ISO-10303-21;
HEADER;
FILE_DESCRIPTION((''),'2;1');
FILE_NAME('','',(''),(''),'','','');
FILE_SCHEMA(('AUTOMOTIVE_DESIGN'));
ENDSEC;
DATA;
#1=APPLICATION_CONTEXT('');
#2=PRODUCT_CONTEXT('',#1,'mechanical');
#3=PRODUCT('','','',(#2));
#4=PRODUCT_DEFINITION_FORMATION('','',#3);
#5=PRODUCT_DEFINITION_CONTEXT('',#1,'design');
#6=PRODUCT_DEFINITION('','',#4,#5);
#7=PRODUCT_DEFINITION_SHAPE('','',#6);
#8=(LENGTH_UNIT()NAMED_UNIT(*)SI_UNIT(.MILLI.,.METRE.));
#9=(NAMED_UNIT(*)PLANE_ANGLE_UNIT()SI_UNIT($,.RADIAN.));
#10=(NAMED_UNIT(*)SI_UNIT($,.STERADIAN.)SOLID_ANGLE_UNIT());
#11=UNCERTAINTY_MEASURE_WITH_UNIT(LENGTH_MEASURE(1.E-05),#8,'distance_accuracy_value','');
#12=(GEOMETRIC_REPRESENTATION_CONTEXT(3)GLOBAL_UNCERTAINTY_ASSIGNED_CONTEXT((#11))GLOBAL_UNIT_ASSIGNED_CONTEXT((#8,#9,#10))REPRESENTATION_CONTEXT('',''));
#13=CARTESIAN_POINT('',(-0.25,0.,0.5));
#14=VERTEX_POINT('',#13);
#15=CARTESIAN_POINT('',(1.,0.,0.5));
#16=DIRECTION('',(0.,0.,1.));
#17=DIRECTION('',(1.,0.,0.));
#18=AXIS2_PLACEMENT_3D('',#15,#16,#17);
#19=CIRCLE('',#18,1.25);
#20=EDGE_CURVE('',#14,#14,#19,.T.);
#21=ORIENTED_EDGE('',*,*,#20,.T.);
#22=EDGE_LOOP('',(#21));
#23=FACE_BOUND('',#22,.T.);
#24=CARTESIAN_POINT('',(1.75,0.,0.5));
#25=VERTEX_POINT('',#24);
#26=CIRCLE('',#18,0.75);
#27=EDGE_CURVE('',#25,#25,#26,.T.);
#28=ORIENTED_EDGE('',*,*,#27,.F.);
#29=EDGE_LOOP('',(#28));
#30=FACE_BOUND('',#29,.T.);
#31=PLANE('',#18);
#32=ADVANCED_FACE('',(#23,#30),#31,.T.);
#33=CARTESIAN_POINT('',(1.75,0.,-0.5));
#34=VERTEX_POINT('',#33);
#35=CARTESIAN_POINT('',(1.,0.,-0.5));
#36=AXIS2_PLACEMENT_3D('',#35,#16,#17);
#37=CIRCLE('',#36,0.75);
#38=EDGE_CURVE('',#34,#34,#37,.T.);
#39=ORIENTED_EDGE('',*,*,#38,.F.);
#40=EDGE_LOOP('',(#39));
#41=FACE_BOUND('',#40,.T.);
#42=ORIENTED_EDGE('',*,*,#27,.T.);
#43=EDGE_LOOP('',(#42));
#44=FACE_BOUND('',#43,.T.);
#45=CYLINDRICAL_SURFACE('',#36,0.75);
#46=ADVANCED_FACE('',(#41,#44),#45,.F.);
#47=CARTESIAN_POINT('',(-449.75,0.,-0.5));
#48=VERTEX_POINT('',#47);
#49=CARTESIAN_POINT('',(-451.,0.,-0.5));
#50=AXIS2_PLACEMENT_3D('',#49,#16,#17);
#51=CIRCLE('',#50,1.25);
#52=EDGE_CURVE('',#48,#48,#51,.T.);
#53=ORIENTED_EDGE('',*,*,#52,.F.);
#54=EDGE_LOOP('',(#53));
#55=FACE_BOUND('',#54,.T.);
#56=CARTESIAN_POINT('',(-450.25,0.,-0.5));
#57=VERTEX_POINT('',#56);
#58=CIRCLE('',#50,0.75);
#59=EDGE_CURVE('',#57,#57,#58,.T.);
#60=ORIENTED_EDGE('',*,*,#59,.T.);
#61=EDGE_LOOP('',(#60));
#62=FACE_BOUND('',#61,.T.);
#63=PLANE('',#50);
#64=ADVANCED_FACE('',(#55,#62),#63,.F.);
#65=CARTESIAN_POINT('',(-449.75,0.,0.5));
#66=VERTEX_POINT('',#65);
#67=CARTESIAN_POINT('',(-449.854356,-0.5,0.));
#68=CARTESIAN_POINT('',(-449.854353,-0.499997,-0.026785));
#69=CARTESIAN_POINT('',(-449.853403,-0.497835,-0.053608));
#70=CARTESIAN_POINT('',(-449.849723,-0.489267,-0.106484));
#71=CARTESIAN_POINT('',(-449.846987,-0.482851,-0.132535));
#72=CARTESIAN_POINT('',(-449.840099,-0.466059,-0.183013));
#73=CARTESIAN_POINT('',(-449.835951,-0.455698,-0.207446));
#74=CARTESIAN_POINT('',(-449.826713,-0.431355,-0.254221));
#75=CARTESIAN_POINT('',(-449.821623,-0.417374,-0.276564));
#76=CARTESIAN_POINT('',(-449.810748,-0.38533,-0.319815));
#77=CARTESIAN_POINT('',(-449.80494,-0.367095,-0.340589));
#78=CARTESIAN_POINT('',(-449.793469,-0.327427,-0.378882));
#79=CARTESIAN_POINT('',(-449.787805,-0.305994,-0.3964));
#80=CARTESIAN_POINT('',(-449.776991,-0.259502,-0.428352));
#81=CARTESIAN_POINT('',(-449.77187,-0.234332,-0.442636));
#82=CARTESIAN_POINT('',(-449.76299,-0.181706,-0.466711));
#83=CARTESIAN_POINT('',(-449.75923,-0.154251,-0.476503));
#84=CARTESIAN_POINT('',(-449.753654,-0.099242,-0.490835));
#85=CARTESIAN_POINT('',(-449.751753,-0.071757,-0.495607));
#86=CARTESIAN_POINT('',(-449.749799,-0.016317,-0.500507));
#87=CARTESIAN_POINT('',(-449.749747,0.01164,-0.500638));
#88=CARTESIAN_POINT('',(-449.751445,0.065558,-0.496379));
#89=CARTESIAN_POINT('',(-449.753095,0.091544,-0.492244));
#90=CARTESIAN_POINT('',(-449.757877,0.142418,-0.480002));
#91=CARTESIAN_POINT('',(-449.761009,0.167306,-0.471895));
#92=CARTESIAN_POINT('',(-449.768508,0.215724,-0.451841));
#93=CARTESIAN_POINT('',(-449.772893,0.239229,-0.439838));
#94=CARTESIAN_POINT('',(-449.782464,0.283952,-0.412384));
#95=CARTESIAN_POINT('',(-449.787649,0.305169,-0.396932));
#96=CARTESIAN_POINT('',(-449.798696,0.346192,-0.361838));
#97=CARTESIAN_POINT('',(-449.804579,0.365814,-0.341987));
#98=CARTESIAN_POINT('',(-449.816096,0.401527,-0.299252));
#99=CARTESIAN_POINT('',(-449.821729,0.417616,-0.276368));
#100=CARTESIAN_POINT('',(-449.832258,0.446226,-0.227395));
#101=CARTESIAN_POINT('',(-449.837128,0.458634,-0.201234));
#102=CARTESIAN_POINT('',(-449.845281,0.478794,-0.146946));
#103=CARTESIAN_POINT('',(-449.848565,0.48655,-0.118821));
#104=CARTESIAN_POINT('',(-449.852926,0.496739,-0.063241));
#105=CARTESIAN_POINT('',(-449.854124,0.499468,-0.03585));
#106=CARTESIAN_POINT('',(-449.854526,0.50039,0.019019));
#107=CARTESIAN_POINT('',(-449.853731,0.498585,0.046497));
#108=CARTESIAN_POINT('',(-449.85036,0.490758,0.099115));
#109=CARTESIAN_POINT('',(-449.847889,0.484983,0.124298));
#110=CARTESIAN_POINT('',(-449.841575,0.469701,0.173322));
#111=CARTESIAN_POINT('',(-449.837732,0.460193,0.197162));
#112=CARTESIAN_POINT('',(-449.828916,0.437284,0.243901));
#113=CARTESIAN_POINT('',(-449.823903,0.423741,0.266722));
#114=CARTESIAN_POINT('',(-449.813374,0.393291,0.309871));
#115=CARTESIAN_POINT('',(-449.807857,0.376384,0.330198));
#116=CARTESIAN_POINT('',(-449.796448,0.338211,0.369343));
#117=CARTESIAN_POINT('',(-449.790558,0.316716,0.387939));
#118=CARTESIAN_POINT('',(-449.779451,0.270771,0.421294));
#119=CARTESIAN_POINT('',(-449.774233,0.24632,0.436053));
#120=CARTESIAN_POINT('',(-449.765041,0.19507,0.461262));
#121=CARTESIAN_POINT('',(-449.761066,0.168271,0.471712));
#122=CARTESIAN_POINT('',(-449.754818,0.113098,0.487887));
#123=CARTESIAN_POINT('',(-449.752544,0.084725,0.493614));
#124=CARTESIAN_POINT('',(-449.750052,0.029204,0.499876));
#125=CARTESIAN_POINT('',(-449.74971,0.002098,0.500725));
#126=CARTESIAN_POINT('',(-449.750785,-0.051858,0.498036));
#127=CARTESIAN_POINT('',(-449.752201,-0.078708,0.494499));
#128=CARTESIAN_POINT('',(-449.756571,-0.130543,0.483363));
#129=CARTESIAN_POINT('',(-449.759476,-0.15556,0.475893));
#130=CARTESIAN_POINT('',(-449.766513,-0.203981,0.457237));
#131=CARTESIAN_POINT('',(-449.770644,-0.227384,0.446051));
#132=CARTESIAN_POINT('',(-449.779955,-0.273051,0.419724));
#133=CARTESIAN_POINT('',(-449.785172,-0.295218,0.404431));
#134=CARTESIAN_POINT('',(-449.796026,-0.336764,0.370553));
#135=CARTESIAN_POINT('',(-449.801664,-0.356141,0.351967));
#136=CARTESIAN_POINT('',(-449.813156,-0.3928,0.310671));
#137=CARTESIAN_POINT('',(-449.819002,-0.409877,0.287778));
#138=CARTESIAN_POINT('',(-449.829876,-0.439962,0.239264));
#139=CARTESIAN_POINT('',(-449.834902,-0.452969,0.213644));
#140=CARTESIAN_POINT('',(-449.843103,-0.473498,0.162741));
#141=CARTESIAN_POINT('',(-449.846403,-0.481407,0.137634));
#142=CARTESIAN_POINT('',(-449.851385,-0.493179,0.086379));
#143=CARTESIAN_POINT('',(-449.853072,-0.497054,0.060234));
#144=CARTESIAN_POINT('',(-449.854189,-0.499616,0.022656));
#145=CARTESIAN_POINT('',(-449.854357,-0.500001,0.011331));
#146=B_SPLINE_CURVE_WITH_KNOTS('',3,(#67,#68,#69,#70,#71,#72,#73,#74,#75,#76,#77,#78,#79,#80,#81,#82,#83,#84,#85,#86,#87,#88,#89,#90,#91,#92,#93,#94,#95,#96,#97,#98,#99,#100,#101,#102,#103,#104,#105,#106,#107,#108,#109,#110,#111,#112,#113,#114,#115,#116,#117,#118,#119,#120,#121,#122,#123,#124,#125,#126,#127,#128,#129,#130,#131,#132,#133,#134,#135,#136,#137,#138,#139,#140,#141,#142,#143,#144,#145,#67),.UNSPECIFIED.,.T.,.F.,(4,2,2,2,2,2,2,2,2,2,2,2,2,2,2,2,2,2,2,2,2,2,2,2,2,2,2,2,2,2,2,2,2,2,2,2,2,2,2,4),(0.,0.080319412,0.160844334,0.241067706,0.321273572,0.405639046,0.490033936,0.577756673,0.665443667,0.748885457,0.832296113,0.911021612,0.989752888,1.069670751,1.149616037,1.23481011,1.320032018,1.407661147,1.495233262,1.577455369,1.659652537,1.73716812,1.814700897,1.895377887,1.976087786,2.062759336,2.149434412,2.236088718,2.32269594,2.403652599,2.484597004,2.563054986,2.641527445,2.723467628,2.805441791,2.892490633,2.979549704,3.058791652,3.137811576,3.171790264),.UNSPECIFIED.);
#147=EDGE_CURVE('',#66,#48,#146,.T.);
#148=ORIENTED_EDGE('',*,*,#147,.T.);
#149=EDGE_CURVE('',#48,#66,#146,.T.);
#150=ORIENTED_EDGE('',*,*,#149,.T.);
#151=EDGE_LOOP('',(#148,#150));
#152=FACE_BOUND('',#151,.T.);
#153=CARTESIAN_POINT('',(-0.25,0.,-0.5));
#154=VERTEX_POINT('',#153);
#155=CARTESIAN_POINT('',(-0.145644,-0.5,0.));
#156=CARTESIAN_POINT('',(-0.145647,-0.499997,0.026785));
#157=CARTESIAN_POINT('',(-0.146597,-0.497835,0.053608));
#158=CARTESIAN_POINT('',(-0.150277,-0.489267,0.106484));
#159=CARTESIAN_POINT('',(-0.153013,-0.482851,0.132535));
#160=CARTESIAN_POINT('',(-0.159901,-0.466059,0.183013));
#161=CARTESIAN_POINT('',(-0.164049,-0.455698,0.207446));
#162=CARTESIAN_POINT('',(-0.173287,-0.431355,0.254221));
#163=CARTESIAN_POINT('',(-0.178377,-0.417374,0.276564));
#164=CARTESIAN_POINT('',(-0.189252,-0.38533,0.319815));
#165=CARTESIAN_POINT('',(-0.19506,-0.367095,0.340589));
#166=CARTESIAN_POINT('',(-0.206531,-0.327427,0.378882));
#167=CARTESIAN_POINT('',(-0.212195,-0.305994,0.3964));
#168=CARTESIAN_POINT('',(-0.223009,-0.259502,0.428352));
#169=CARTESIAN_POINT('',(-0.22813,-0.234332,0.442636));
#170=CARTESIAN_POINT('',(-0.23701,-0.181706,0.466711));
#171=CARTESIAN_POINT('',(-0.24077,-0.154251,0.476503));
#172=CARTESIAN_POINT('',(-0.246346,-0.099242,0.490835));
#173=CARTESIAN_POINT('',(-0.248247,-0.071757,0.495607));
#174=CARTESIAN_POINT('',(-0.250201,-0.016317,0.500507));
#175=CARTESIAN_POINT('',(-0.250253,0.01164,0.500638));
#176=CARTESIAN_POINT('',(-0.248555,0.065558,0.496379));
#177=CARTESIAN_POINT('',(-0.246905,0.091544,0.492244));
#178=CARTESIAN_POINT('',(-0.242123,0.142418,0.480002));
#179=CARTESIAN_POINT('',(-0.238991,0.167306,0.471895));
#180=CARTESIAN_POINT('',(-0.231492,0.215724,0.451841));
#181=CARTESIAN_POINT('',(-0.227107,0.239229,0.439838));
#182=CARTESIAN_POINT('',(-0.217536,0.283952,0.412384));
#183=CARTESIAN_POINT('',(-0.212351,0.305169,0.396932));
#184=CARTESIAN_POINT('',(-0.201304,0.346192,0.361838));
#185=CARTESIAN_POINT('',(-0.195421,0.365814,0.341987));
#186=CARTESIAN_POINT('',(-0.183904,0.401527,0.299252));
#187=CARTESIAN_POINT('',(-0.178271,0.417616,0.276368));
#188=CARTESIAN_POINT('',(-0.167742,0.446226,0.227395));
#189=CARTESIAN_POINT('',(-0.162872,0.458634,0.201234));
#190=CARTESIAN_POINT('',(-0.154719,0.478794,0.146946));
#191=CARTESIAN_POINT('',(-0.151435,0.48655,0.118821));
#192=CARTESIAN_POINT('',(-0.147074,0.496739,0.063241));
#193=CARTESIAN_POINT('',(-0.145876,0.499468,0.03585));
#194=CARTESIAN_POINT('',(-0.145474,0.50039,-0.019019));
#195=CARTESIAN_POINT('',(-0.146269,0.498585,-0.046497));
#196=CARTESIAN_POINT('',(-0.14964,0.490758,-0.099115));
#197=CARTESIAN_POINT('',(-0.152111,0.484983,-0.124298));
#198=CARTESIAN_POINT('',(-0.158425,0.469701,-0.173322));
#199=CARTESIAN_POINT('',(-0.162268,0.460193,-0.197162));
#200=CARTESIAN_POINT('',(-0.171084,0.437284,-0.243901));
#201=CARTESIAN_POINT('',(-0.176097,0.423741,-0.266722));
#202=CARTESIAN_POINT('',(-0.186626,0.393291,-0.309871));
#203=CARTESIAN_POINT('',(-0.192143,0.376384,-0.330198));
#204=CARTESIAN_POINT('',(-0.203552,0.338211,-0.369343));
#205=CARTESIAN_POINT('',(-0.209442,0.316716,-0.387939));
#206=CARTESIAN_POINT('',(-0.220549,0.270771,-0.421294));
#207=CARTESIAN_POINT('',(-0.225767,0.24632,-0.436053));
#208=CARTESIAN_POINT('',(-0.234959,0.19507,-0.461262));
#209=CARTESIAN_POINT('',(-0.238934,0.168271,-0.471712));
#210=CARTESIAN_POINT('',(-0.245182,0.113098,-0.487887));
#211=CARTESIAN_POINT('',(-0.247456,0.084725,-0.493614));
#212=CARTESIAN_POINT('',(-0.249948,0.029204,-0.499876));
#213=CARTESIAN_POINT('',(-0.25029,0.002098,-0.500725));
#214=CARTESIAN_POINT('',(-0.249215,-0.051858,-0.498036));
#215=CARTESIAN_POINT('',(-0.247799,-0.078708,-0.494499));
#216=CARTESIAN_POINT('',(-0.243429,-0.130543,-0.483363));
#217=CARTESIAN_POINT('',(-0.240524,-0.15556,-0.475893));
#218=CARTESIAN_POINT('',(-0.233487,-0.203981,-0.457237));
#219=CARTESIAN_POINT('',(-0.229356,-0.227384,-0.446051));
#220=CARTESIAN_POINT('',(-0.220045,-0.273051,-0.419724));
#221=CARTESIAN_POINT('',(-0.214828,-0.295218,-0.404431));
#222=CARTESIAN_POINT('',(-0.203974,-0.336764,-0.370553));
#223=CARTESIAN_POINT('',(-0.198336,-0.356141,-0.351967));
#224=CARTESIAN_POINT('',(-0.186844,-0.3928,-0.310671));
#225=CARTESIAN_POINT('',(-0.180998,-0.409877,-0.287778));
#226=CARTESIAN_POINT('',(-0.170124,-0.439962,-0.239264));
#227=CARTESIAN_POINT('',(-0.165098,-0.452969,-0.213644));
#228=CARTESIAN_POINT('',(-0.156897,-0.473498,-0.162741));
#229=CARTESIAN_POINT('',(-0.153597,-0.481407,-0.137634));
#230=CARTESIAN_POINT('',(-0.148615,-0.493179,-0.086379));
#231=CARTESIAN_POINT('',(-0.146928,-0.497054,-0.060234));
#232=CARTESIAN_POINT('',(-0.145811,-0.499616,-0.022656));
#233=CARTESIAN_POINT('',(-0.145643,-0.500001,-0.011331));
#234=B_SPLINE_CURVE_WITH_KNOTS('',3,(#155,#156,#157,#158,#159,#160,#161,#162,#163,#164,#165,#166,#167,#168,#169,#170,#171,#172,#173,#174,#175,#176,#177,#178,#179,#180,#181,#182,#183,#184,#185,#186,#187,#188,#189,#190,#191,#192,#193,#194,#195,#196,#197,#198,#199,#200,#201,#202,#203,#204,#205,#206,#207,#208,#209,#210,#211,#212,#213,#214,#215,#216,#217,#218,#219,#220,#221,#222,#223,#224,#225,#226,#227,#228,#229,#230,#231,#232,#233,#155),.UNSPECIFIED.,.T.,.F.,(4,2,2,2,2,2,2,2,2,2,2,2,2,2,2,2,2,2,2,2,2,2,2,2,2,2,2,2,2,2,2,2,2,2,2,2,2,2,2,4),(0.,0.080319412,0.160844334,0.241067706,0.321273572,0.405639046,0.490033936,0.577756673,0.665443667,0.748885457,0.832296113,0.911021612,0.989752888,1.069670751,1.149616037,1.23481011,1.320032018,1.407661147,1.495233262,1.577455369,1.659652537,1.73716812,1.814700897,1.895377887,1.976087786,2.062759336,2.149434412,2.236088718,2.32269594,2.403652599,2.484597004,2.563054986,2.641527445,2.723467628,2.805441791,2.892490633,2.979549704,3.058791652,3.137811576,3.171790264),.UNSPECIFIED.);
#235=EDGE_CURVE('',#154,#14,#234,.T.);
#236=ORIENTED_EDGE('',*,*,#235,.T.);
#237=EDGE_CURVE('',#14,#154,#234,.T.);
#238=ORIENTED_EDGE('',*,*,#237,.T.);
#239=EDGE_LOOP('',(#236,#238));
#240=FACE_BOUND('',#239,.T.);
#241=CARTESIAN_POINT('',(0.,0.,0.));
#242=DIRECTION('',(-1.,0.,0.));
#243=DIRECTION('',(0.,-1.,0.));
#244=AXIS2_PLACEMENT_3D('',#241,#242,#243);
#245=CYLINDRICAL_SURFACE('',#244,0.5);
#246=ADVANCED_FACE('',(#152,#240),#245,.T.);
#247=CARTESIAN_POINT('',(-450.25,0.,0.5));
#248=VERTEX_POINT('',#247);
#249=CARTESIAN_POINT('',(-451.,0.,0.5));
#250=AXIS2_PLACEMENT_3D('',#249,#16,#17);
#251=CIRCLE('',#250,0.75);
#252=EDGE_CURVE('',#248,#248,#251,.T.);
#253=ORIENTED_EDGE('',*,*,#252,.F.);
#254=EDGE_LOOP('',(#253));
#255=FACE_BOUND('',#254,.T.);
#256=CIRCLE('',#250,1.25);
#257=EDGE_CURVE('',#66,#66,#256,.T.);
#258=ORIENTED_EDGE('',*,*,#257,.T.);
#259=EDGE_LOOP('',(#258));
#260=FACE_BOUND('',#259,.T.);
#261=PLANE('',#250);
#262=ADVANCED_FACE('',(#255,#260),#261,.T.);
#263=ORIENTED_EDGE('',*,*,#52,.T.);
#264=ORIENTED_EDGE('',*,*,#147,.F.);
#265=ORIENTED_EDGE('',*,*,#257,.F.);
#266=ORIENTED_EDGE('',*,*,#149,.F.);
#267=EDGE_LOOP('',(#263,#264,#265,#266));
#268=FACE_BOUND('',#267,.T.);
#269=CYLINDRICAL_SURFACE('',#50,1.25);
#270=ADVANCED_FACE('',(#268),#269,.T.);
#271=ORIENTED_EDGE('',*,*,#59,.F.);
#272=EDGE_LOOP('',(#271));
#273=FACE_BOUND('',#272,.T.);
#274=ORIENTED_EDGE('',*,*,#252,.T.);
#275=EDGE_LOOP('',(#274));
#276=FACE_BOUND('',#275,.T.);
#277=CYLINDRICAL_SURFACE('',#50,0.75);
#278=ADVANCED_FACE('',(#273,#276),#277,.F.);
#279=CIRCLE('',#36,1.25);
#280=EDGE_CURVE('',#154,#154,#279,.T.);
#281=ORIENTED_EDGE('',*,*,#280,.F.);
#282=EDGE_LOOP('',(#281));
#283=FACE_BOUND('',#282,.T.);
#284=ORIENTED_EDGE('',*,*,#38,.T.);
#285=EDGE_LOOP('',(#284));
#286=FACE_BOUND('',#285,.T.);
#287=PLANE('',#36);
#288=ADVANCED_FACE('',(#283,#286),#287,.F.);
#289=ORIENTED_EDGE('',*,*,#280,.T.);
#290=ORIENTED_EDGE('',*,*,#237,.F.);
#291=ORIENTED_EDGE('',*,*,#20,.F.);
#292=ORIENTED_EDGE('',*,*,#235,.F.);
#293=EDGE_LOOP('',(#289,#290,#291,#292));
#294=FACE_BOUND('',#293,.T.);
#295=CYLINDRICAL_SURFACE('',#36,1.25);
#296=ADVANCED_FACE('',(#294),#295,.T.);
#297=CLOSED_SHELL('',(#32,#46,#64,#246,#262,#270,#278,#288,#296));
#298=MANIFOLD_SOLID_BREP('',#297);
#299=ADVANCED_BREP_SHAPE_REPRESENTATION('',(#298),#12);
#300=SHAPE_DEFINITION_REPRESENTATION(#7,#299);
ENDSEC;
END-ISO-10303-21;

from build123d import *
from build123d.topology import SkipClean

# Parameters (mm, degrees)
CROQUIS2_R                   = 0.5
SALIENTE_EXTRUIR1_DEPTH      = 0.5
SALIENTE_EXTRUIR1_DEPTH_BACK = 0.5
CROQUIS3_R                   = 1.25
CROQUIS3_R_2                 = 0.75


with BuildPart() as part:
    # Barrer1: sweep along a path in Croquis1
    with BuildLine(Plane.XY) as barrer1_path:
        Line((0, 0), (-450, 0))
    # Croquis2 → Barrer1 (sweep)
    with BuildSketch(Plane(origin=(0, 0, 0), x_dir=(0, 0, -1), z_dir=(1, 0, 0))):
        Circle(CROQUIS2_R)
    sweep(path=barrer1_path.line)

    # Croquis3 → Saliente-Extruir1 (add, two sides: drawn at the far end of the back side and taken through both)
    # profile 1 of 2: a face of its own
    with SkipClean():  # the faces are left unmerged after this step: merging them gives an invalid solid
        with BuildSketch(Plane.XY.offset(-SALIENTE_EXTRUIR1_DEPTH_BACK)):
            with Locations((1, 0)):
                Circle(CROQUIS3_R)
            with Locations((1, 0)):
                Circle(CROQUIS3_R_2, mode=Mode.SUBTRACT)
        # profile 2 of 2: a face of its own
        with BuildSketch(Plane.XY.offset(-SALIENTE_EXTRUIR1_DEPTH_BACK)):
            with Locations((-451, 0)):
                Circle(CROQUIS3_R)
            with Locations((-451, 0)):
                Circle(CROQUIS3_R_2, mode=Mode.SUBTRACT)
        extrude(amount=SALIENTE_EXTRUIR1_DEPTH + SALIENTE_EXTRUIR1_DEPTH_BACK)


solid = part.part
